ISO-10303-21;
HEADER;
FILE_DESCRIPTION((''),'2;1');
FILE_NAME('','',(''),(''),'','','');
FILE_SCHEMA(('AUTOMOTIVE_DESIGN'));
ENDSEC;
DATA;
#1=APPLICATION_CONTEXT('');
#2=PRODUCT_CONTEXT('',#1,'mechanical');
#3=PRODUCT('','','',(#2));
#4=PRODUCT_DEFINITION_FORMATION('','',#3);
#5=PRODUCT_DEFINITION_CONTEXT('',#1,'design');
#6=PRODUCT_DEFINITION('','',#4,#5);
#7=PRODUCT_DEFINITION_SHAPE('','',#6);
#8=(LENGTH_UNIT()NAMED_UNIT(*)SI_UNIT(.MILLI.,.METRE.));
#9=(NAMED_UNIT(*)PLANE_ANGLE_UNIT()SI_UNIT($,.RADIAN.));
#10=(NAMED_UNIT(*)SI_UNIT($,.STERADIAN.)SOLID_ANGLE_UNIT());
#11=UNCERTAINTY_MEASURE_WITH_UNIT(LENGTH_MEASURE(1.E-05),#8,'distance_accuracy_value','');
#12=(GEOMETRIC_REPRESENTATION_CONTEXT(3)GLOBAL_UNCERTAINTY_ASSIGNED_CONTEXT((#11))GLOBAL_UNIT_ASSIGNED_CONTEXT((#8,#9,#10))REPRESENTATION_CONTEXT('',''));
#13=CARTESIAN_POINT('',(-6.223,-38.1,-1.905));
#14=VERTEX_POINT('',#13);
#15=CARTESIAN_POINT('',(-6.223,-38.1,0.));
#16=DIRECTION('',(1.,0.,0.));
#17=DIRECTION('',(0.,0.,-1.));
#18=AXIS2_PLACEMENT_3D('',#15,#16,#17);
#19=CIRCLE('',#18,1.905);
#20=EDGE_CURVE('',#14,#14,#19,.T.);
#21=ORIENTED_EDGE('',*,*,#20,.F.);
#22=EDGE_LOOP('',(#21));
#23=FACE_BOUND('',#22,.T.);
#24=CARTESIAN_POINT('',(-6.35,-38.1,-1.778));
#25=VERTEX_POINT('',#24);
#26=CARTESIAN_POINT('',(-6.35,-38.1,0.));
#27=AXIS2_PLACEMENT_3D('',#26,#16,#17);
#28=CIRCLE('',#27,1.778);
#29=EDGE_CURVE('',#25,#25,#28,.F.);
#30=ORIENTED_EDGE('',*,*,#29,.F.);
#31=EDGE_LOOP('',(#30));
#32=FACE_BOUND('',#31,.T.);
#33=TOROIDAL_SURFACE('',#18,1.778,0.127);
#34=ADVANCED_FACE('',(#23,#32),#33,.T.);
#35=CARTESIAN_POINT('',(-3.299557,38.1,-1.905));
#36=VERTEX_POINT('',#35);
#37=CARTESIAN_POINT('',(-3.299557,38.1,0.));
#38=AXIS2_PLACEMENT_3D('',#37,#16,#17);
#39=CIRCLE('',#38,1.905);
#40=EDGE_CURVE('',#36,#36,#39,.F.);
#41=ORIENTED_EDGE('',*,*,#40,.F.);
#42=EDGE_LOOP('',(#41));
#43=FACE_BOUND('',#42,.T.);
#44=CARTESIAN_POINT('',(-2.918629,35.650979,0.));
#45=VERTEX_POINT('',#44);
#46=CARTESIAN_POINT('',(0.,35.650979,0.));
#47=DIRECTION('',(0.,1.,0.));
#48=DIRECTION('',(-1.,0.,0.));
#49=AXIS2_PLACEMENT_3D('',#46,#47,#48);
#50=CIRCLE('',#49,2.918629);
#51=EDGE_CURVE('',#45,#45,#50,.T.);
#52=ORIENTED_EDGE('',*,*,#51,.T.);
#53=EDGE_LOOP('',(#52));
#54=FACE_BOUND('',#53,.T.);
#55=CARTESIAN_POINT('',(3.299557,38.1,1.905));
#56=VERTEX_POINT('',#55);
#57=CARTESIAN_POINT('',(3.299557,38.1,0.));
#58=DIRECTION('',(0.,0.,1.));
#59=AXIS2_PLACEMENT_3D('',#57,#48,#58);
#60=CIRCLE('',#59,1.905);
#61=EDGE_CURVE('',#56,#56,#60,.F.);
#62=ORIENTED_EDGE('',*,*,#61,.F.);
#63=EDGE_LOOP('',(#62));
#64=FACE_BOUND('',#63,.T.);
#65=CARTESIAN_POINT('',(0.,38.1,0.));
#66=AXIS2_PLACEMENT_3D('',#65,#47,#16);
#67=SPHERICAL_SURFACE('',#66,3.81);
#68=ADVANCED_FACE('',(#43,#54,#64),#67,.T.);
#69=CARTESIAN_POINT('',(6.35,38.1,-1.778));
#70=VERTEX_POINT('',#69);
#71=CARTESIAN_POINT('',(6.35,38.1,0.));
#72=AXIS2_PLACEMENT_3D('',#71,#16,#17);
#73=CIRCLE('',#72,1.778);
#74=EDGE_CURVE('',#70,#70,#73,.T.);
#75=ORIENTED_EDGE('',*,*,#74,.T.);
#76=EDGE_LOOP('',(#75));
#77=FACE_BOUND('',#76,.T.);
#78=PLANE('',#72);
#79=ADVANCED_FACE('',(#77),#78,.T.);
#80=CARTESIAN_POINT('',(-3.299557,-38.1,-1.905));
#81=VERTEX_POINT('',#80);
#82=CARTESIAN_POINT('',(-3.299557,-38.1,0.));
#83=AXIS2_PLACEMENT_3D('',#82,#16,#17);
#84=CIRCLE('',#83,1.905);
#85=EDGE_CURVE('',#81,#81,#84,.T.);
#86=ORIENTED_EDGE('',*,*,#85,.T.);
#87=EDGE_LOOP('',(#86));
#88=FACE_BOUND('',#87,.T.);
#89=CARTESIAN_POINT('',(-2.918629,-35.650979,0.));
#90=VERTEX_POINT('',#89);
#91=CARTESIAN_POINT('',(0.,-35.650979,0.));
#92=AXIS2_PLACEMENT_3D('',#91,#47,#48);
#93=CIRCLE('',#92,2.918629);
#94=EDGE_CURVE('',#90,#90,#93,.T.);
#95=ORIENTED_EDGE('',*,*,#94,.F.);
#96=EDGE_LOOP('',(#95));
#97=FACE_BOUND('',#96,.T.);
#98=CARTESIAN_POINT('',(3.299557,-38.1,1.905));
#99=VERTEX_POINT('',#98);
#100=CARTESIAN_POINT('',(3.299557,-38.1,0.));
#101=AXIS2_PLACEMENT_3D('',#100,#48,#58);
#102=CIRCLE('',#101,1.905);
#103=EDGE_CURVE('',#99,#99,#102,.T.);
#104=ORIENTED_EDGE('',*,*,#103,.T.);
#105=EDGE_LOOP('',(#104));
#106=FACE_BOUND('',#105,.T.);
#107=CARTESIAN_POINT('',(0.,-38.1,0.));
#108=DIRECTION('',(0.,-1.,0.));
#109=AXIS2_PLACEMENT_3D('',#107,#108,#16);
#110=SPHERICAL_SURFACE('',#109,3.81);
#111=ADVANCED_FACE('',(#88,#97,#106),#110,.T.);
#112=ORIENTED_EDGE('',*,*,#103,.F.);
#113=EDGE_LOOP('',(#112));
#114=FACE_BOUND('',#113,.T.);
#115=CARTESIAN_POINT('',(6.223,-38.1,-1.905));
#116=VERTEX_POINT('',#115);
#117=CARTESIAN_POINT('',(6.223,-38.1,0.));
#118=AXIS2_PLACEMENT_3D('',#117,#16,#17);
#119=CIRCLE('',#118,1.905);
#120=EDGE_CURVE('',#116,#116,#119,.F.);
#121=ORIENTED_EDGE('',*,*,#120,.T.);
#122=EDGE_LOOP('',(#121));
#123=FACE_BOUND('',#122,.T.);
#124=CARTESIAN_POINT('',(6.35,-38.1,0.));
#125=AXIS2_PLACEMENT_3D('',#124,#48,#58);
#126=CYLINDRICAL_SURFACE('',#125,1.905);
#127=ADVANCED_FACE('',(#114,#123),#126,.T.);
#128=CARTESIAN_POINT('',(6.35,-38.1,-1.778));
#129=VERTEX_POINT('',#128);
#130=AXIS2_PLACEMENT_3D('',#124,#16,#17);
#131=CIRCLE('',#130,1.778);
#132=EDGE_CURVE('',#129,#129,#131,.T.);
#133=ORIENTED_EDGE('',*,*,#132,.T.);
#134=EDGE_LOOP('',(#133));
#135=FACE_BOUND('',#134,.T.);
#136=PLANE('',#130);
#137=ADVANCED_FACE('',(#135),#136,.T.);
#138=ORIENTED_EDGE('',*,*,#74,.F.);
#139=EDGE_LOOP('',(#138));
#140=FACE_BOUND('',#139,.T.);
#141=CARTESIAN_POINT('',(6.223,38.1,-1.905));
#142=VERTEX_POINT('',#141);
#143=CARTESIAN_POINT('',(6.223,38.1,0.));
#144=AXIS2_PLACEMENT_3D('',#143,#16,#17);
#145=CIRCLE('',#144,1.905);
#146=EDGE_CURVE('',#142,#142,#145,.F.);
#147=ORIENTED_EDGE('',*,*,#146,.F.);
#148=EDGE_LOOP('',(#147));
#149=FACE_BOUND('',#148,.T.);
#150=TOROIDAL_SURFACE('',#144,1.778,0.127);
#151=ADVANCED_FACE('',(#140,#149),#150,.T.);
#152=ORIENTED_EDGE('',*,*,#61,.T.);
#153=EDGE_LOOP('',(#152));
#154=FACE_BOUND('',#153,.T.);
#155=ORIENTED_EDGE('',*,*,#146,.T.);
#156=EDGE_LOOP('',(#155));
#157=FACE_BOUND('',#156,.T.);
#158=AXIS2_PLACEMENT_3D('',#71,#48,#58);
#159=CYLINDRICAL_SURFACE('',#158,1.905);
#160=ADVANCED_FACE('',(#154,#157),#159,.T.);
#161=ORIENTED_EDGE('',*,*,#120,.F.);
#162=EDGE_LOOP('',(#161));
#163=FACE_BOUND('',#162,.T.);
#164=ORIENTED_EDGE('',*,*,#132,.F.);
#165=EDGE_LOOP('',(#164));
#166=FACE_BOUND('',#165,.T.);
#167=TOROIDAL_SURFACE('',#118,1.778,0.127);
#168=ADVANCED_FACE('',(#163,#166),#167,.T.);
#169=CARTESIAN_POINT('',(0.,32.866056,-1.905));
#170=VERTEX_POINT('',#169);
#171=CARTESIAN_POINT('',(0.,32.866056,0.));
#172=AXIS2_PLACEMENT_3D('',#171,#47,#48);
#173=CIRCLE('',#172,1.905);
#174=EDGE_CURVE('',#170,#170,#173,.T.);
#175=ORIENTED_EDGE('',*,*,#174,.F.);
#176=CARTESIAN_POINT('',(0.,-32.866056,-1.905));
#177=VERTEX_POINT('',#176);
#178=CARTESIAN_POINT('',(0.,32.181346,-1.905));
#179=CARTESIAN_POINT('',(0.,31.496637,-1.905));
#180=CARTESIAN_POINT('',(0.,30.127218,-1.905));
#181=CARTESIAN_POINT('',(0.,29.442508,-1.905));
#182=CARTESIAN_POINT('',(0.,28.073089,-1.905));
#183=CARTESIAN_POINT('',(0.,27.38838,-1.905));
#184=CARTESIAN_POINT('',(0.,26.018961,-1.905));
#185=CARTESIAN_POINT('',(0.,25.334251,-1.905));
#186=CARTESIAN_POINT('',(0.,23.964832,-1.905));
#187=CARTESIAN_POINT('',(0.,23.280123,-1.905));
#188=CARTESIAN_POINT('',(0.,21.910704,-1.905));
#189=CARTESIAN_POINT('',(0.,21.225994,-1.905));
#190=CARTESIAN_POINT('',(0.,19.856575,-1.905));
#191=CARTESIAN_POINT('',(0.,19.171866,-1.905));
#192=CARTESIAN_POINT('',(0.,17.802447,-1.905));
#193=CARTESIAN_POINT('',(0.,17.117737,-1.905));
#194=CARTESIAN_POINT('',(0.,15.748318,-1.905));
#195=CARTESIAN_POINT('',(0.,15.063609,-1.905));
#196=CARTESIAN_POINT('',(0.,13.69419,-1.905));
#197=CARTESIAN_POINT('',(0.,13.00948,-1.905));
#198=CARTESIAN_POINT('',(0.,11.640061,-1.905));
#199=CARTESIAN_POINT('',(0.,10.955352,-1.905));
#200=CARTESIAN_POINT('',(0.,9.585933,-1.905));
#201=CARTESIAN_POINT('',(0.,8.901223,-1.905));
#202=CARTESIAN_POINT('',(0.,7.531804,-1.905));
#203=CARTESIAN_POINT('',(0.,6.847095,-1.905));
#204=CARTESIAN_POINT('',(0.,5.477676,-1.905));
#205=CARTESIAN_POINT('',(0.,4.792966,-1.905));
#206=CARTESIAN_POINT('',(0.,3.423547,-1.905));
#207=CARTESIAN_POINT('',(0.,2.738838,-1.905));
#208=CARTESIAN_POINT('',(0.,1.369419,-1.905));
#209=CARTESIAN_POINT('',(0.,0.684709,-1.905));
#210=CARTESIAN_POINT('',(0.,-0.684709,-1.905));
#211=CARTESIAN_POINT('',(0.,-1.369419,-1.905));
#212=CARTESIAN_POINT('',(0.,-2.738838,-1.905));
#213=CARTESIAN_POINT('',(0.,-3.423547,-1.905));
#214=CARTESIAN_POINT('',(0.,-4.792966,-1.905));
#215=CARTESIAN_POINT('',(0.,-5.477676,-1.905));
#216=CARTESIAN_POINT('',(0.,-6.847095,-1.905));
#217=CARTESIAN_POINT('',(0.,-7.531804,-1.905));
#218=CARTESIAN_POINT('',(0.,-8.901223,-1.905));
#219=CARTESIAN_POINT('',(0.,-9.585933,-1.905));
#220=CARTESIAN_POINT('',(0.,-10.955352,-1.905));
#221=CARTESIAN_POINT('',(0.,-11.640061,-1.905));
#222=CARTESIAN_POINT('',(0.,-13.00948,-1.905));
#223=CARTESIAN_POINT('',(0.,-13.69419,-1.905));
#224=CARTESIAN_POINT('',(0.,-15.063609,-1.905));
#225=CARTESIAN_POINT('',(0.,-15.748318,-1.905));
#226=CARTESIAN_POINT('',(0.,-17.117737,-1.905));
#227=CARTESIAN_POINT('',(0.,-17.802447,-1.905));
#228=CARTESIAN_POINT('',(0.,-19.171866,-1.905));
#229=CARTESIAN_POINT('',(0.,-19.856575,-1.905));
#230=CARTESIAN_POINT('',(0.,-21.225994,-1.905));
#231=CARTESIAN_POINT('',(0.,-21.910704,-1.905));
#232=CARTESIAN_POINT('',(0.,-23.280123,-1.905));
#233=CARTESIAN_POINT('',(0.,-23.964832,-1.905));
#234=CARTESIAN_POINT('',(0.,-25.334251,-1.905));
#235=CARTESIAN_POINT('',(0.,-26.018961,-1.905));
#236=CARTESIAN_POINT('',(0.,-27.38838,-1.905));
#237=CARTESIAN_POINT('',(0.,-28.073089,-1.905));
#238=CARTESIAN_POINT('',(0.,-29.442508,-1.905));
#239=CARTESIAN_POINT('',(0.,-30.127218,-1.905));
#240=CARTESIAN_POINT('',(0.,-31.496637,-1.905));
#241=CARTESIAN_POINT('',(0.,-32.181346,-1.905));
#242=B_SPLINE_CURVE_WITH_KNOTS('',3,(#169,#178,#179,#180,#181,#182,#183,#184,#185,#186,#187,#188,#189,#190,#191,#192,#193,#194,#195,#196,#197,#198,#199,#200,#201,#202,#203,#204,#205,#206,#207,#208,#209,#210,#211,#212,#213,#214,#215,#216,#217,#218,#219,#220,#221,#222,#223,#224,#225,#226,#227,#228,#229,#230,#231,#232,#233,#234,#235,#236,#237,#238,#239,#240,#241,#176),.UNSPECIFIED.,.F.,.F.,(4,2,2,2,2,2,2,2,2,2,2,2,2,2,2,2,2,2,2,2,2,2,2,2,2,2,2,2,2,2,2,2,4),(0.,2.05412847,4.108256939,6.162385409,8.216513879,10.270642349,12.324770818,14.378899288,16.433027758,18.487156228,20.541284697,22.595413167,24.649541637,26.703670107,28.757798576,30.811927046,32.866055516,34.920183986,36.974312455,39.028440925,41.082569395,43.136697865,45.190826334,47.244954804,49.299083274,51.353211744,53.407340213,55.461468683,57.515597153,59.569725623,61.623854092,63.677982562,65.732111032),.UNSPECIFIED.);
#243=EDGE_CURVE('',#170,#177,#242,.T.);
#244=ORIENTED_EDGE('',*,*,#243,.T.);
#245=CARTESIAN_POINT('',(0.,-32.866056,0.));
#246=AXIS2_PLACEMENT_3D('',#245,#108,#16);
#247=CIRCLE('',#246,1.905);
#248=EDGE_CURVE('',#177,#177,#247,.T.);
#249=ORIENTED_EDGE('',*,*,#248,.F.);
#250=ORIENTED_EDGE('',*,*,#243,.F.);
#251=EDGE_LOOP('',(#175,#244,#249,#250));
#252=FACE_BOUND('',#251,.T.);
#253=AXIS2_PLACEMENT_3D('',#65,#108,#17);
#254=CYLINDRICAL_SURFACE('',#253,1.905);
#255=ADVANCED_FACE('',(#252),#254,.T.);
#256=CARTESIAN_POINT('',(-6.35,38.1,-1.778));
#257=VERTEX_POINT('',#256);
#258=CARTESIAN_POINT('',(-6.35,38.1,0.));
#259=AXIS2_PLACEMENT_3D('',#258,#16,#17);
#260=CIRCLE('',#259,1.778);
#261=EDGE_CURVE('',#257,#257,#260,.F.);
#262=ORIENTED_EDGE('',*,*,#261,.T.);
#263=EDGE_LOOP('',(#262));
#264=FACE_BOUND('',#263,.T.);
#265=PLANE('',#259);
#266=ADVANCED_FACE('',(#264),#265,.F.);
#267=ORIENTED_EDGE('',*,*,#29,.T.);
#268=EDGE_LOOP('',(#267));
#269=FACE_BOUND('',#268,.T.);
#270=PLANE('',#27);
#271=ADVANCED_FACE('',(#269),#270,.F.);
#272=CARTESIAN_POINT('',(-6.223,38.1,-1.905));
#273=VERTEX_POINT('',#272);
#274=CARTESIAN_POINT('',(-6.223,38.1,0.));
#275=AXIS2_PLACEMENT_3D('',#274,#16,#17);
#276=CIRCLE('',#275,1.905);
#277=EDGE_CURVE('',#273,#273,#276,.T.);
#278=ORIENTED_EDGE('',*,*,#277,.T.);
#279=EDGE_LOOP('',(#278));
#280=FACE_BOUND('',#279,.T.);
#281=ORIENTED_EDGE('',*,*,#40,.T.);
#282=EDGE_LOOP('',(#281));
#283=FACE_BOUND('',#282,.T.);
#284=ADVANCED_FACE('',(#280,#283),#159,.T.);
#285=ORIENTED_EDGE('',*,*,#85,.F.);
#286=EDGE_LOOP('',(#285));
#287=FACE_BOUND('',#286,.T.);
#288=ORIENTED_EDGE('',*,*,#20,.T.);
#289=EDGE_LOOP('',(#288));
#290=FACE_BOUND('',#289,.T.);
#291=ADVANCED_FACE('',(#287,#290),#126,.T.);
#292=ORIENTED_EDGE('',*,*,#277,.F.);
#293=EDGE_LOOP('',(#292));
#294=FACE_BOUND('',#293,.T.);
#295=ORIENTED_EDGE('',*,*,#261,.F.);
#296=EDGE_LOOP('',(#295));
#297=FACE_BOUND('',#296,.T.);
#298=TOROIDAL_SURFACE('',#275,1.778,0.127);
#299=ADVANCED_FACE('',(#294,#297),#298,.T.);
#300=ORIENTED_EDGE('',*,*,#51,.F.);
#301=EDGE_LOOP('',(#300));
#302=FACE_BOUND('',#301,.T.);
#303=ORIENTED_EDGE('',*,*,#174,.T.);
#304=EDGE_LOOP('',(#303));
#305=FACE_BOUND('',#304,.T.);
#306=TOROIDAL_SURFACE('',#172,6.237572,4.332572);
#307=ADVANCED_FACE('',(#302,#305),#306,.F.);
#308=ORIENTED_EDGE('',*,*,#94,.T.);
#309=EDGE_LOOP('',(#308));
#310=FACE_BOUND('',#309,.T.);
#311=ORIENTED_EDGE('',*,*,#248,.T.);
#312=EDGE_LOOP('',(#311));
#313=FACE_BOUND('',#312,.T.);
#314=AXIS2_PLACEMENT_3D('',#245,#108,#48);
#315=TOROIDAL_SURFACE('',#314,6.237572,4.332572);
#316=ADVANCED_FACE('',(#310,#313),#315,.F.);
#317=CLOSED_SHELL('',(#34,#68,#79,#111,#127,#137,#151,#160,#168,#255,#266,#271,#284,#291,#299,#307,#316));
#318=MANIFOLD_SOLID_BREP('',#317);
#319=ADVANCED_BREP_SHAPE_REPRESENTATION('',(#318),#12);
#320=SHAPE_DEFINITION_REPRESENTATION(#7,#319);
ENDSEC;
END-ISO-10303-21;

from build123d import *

# Parameters (mm, degrees)
SKETCH1_R           = 1.905
BOSS_EXTRUDE1_DEPTH = 38.1
SKETCH3_R           = 1.905
BOSS_EXTRUDE2_DEPTH = 6.35
FILLET1_R           = 0.127
MIRROR1_START       = -32.866055516
MIRROR1_2_OUTLINE_R = 1.905
MIRROR1_2_DEPTH     = 32.866055516


with BuildPart() as part:
    # Sketch1 → Boss-Extrude1 (new body)
    with BuildSketch(Plane(origin=(0, 0, 0), x_dir=(1, 0, 0), z_dir=(0, 1, 0))):
        with Locations(Location((0, 0, 0), (0, 0, 90))):
            Circle(SKETCH1_R)
    extrude(amount=BOSS_EXTRUDE1_DEPTH)

    # Sketch2 → Revolve2 (revolve)
    with BuildSketch(Plane.XY, mode=Mode.PRIVATE) as revolve2_sk:
        with BuildLine():
            Line((1.905, 32.866055516), (0, 32.866055516))
            Line((0, 32.866055516), (0, 41.91))
            ThreePointArc((0, 41.91), (3.453032669, 39.710175577), (2.918629328, 35.650979207))
            ThreePointArc((2.918629328, 35.650979207), (2.166286071, 34.347882461), (1.905, 32.866055516))
        make_face()
    revolve(revolve2_sk.sketch.rotate(Axis((0, 41.91, 0), (0, -1, 0)), 270), axis=Axis((0, 41.91, 0), (0, -1, 0)))

    # Sketch3 → Boss-Extrude2 (add, symmetric)
    with BuildSketch(Plane(origin=(0, 0, 0), x_dir=(0, 0, -1), z_dir=(1, 0, 0))):
        with Locations(Location((0, 38.1, 0), (0, 0, 180))):
            Circle(SKETCH3_R)
    extrude(amount=BOSS_EXTRUDE2_DEPTH, both=True)

    # Fillet1
    fillet1_edges = [part.edges().sort_by_distance(p)[0] for p in [
        (-6.35, 38.1, -1.905),
        (6.35, 38.1, -1.905),
    ]]
    fillet(fillet1_edges, radius=FILLET1_R)



with BuildPart() as body_2:
    # Mirror1: read off the stored shape, not the designer's step
    # Mirror1 outline → Mirror1 (revolve)
    with BuildSketch(Plane.XY):
        with BuildLine():
            Line((0, -32.866055516), (0, -41.91))
            ThreePointArc((0, -41.91), (3.453032669, -39.710175576), (2.918629327, -35.650979205))
            ThreePointArc((2.918629327, -35.650979205), (2.166286071, -34.347882461), (1.905, -32.866055516))
            Line((1.905, -32.866055516), (0, -32.866055516))
        make_face()
    revolve(axis=Axis((0, 0, 0), (0, 1, 0)))


with BuildPart() as part_1:
    add(part.part)

    add(body_2.part)  # Mirror1 2 merges body 2
    # Mirror1 2 outline → Mirror1 2 (add)
    with BuildSketch(Plane(origin=(0, 0, 0), x_dir=(1, 0, 0), z_dir=(0, 1, 0)).offset(MIRROR1_START)):
        Circle(MIRROR1_2_OUTLINE_R)
    extrude(amount=MIRROR1_2_DEPTH)

    # Mirror1 3 outline → Mirror1 3 (revolve)
    with BuildSketch(Plane(origin=(0, -38.1, 0), x_dir=(0, 1, 0), z_dir=(0, 0, -1))):
        with BuildLine():
            Line((1.778, 6.35), (0, 6.35))
            Line((0, 6.35), (0, 3.299556788))
            Line((0, 3.299556788), (1.905, 3.299556788))
            Line((1.905, 3.299556788), (1.905, 6.223))
            ThreePointArc((1.905, 6.223), (1.867802561, 6.312802561), (1.778, 6.35))
        make_face()
        with BuildLine():
            Line((1.905, -3.299556788), (0, -3.299556788))
            Line((0, -3.299556788), (0, -6.35))
            Line((0, -6.35), (1.778, -6.35))
            ThreePointArc((1.778, -6.35), (1.867802561, -6.312802561), (1.905, -6.223))
            Line((1.905, -6.223), (1.905, -3.299556788))
        make_face()
    revolve(axis=Axis((0, -38.1, 0), (1, 0, 0)))


solid = part_1.part
